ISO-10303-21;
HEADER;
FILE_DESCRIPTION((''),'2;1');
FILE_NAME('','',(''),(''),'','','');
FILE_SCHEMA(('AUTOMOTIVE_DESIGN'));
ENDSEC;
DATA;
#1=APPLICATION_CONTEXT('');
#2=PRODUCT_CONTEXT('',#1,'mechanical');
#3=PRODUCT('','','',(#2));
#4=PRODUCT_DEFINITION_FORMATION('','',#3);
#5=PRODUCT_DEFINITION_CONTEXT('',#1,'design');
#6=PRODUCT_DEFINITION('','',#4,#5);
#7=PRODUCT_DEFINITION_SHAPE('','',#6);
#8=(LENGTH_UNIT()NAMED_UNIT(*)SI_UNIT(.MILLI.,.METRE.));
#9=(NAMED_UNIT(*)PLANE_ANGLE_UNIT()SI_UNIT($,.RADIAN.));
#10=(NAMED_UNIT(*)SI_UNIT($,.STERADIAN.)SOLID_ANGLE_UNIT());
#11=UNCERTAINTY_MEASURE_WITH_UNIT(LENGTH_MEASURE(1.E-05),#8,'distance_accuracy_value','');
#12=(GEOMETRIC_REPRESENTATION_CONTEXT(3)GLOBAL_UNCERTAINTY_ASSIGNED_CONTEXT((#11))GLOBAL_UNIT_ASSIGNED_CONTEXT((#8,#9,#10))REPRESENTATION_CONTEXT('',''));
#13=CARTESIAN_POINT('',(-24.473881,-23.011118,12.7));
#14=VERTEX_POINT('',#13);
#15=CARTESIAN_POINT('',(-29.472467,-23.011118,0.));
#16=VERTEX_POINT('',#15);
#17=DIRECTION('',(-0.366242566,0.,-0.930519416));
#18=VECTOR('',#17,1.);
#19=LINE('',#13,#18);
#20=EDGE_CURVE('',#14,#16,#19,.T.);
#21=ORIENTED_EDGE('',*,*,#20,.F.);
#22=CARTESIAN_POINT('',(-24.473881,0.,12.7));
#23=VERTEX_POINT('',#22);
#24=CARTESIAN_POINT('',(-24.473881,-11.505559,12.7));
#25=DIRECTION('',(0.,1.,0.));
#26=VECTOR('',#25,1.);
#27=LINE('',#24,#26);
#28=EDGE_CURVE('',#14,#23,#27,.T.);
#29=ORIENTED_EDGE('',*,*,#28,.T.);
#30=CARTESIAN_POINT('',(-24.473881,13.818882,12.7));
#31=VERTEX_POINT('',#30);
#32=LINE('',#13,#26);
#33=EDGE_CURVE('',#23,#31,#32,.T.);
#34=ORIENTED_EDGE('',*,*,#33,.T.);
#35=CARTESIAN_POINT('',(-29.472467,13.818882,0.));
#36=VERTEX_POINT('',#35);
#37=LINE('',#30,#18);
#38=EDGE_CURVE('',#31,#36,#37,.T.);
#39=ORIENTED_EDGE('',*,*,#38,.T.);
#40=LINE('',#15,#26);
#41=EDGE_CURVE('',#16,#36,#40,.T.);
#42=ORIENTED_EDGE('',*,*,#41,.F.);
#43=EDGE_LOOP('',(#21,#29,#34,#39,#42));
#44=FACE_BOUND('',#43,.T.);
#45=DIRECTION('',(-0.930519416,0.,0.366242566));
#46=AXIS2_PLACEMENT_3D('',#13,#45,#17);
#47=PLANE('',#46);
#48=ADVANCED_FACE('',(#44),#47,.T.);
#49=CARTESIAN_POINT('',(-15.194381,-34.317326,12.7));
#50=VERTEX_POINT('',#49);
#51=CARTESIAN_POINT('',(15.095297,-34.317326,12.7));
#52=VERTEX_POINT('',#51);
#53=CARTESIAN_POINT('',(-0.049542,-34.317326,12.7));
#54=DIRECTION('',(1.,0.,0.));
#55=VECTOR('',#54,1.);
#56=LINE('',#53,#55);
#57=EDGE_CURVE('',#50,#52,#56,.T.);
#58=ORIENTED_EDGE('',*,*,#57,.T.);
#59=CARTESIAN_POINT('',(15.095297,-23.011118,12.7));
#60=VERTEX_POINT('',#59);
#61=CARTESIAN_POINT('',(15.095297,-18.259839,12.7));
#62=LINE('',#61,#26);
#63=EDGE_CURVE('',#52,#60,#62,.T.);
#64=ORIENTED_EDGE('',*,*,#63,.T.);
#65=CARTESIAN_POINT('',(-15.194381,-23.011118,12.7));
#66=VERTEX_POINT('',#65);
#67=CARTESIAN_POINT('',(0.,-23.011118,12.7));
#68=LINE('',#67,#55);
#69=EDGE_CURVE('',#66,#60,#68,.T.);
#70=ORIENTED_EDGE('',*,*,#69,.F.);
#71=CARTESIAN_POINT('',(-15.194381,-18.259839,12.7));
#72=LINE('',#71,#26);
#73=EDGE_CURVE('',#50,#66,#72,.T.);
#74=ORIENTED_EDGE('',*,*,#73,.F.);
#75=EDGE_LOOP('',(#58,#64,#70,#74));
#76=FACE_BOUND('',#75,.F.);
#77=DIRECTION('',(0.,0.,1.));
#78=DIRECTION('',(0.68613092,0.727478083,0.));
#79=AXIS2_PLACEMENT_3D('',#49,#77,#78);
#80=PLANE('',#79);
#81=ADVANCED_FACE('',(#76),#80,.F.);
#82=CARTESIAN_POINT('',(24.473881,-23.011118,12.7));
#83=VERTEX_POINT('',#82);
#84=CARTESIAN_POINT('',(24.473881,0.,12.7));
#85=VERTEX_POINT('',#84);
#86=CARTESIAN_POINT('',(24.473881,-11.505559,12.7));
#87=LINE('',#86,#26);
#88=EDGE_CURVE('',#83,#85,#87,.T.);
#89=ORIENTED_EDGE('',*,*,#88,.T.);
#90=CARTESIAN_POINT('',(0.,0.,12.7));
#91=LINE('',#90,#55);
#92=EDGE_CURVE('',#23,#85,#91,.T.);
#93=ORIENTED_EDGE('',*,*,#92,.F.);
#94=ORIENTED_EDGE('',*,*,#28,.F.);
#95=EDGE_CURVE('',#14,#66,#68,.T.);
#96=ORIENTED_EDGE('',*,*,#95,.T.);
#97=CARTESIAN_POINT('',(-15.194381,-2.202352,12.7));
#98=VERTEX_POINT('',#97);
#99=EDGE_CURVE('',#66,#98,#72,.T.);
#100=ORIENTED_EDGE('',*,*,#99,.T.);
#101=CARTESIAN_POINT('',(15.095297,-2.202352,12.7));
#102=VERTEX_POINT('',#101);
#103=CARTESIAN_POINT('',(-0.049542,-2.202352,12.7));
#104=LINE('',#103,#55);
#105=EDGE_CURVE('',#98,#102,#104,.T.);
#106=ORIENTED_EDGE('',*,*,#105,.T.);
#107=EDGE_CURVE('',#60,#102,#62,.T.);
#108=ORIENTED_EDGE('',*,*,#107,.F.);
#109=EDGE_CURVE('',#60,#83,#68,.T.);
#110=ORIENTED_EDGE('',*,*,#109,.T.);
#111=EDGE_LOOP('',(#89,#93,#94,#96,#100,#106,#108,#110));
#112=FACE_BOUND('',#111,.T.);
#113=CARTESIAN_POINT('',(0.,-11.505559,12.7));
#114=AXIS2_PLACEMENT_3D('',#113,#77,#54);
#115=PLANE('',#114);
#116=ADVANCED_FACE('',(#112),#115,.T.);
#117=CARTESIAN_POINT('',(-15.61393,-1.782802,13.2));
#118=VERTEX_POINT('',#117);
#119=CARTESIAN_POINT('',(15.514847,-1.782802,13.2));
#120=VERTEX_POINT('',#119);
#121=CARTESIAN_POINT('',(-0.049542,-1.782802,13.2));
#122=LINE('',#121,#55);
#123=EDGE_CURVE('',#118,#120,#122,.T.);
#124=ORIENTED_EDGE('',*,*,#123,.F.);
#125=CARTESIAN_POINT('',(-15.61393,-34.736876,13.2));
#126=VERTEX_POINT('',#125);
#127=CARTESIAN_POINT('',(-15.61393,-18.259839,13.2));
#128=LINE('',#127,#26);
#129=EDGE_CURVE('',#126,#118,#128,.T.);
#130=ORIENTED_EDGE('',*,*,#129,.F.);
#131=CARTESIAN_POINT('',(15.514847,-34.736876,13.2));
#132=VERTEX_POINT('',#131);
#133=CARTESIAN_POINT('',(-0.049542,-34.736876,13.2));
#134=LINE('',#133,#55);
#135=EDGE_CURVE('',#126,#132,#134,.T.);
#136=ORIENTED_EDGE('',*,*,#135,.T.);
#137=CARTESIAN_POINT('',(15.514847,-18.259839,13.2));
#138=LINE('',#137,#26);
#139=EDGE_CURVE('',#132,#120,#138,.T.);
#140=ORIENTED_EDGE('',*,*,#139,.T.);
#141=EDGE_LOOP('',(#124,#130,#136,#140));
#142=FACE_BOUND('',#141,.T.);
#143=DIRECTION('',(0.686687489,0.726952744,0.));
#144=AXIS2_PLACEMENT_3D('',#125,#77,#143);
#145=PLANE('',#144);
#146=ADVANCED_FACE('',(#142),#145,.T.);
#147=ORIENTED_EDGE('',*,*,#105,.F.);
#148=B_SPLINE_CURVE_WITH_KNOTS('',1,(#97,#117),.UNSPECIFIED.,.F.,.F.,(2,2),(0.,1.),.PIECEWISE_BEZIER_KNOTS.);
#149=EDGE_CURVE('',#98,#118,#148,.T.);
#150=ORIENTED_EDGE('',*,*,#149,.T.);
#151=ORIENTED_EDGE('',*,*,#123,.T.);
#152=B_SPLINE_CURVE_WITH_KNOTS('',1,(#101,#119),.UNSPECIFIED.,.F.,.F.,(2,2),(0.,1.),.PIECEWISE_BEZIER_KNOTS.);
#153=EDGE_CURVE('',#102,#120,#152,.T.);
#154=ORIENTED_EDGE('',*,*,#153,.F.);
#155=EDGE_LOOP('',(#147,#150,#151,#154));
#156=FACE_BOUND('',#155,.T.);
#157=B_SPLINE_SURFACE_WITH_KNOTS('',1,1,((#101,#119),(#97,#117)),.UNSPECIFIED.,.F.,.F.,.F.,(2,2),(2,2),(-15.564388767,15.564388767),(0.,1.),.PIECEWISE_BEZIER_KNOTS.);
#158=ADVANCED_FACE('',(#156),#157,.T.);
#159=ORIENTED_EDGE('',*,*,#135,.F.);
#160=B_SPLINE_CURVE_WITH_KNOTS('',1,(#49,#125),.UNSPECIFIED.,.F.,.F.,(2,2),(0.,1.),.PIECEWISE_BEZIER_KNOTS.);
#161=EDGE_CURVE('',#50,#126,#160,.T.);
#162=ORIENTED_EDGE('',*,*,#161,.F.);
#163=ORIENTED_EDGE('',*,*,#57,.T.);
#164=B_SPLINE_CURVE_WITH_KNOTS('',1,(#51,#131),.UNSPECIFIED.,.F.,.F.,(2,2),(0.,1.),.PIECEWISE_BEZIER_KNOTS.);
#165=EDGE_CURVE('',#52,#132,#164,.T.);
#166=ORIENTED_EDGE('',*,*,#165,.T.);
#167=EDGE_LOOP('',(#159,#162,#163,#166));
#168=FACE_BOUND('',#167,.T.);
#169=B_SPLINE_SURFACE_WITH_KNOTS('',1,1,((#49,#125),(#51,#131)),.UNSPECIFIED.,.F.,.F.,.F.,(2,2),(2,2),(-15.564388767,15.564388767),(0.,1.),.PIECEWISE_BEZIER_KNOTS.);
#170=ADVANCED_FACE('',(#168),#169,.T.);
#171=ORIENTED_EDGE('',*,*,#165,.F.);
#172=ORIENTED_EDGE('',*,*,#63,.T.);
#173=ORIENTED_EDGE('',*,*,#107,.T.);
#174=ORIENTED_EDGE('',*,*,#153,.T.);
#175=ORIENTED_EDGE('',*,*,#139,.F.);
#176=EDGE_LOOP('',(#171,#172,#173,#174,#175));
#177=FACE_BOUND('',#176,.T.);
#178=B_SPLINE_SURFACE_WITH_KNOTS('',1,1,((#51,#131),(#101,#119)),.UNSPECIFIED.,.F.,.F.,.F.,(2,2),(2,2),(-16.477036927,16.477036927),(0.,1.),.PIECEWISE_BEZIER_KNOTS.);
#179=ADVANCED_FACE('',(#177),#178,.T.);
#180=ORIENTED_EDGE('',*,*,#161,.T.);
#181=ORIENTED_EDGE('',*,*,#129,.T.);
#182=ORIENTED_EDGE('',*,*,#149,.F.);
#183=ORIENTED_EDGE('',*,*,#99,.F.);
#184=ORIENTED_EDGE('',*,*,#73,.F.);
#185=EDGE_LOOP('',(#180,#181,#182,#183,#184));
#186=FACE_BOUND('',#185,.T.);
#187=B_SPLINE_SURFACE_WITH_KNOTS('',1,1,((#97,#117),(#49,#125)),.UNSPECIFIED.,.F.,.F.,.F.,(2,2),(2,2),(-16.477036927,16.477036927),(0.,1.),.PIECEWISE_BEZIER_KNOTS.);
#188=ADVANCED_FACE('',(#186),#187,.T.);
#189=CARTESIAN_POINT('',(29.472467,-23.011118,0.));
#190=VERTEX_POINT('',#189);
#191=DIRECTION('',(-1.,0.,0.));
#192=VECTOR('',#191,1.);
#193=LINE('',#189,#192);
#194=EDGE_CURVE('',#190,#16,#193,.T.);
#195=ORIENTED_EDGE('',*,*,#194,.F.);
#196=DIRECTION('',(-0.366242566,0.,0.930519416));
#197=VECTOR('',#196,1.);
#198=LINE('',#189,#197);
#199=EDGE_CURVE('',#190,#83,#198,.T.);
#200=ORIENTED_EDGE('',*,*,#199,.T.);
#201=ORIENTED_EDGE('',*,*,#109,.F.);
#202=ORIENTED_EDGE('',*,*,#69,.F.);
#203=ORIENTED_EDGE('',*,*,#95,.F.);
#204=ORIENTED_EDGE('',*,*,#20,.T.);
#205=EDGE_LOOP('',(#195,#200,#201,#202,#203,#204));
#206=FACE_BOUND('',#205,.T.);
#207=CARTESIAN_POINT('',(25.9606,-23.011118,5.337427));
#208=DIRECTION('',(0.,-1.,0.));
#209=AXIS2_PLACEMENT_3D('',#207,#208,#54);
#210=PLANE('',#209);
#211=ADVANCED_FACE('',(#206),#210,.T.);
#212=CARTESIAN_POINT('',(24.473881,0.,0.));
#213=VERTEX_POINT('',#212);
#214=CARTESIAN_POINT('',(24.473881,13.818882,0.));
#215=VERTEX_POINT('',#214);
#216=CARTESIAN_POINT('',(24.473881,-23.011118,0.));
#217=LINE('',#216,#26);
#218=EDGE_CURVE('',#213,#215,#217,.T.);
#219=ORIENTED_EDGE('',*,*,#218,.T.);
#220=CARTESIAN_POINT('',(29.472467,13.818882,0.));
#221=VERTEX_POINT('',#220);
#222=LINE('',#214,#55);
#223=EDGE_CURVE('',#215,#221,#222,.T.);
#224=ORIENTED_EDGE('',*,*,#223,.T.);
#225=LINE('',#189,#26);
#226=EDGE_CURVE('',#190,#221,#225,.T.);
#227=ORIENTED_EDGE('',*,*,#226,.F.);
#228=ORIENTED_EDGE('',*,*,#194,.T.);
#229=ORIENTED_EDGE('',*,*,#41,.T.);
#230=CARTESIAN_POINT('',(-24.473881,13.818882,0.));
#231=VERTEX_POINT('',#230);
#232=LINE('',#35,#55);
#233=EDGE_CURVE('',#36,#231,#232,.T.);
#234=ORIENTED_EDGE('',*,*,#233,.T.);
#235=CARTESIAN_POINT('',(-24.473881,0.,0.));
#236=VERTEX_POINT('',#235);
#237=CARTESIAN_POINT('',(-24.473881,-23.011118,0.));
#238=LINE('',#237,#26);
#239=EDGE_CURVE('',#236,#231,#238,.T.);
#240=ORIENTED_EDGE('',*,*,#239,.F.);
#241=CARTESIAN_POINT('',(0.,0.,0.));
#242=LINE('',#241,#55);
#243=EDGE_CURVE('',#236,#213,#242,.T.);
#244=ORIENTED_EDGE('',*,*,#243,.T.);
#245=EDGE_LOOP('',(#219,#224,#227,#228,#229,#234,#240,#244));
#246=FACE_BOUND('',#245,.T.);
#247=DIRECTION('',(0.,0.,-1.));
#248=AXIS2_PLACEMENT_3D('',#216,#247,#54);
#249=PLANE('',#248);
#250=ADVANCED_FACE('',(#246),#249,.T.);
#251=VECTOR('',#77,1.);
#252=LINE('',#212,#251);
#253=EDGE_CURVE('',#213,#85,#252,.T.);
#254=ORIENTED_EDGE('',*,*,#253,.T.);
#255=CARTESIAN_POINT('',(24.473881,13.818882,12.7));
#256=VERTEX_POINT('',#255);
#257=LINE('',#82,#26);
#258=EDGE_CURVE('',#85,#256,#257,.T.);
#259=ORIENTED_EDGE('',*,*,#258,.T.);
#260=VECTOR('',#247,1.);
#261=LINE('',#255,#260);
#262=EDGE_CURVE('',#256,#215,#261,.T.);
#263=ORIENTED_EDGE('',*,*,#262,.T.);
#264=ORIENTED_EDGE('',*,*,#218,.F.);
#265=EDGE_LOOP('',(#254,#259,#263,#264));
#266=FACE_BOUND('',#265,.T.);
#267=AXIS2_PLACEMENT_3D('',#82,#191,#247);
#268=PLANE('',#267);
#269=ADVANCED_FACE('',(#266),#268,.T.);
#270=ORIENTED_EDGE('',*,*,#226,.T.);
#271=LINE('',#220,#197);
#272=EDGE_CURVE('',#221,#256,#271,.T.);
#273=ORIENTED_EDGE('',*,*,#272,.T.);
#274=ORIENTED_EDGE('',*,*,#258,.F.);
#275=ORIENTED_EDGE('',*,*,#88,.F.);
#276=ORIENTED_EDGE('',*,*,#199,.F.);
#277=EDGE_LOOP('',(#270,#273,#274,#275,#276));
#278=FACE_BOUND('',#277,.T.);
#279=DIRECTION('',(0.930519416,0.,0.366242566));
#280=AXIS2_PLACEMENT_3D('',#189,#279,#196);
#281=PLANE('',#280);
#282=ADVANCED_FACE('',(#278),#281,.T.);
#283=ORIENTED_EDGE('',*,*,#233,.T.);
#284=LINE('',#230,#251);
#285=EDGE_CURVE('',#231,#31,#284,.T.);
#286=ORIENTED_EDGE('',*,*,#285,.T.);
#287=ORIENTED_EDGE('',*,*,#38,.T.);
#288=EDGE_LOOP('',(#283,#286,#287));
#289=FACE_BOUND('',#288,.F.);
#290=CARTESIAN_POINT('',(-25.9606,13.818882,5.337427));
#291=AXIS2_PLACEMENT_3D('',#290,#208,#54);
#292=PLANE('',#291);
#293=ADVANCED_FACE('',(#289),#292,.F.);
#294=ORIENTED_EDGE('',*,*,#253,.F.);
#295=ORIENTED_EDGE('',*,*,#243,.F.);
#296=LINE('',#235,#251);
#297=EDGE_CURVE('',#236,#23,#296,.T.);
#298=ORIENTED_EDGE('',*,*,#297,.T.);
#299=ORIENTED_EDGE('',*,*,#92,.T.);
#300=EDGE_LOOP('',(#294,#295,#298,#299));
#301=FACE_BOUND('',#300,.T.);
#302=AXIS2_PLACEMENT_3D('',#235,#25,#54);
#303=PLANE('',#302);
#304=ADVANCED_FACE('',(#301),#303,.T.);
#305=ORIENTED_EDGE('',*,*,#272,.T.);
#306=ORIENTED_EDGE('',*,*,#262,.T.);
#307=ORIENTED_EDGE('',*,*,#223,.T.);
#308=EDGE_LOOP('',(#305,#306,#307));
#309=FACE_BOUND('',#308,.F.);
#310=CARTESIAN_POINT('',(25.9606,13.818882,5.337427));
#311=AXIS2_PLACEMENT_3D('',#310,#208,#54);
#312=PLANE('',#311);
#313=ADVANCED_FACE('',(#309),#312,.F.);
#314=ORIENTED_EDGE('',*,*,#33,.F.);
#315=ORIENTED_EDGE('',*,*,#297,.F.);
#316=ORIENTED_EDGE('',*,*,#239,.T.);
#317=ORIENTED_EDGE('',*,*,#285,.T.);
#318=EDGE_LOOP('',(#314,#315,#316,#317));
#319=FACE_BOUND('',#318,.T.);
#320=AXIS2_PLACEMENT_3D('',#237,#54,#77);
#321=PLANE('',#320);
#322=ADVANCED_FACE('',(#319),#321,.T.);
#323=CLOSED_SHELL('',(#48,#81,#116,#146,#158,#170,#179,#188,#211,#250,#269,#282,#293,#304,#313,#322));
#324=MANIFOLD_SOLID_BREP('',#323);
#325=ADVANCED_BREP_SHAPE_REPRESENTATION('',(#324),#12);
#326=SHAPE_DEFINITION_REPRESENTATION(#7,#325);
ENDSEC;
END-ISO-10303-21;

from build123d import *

# Parameters (mm, degrees)
F0_W     = 48.9477626979
F0_H     = 23.0111181736
F1_DEPTH = 12.7
F3_DEPTH = 36.83
F4_W     = 30.2896779031
F4_H     = 32.1149742231
F5_DEPTH = 0.5
F5_TAPER = -40


# Not quite as in the source:
# - the program builds the solid bodies; features that only make, move or delete a surface that nothing else refers to are left out


with BuildPart() as f1:
    # F0 (on Top) → F1 (new body)
    with BuildSketch(Plane.XY):
        with Locations((0, -11.5055590868)):
            Rectangle(F0_W, F0_H)
    extrude(amount=F1_DEPTH)

    # F2 (on face) → F3 (join)
    with BuildSketch(Plane.XZ.offset(23.0111181736)):
        Polygon((29.4724665582, 0), (24.473881349, 12.7), (24.473881349, 0), align=None)
        Polygon((-24.473881349, 0), (-24.473881349, 12.7), (-29.4724665582, 0), align=None)
    extrude(amount=-F3_DEPTH)

    # F4 (on face) → F5 (join)
    with BuildSketch(Plane.XY.offset(12.7)):
        with Locations((-0.0495417044, -18.2598386891)):
            Rectangle(F4_W, F4_H)
    extrude(amount=F5_DEPTH, taper=F5_TAPER)


solid = f1.part
